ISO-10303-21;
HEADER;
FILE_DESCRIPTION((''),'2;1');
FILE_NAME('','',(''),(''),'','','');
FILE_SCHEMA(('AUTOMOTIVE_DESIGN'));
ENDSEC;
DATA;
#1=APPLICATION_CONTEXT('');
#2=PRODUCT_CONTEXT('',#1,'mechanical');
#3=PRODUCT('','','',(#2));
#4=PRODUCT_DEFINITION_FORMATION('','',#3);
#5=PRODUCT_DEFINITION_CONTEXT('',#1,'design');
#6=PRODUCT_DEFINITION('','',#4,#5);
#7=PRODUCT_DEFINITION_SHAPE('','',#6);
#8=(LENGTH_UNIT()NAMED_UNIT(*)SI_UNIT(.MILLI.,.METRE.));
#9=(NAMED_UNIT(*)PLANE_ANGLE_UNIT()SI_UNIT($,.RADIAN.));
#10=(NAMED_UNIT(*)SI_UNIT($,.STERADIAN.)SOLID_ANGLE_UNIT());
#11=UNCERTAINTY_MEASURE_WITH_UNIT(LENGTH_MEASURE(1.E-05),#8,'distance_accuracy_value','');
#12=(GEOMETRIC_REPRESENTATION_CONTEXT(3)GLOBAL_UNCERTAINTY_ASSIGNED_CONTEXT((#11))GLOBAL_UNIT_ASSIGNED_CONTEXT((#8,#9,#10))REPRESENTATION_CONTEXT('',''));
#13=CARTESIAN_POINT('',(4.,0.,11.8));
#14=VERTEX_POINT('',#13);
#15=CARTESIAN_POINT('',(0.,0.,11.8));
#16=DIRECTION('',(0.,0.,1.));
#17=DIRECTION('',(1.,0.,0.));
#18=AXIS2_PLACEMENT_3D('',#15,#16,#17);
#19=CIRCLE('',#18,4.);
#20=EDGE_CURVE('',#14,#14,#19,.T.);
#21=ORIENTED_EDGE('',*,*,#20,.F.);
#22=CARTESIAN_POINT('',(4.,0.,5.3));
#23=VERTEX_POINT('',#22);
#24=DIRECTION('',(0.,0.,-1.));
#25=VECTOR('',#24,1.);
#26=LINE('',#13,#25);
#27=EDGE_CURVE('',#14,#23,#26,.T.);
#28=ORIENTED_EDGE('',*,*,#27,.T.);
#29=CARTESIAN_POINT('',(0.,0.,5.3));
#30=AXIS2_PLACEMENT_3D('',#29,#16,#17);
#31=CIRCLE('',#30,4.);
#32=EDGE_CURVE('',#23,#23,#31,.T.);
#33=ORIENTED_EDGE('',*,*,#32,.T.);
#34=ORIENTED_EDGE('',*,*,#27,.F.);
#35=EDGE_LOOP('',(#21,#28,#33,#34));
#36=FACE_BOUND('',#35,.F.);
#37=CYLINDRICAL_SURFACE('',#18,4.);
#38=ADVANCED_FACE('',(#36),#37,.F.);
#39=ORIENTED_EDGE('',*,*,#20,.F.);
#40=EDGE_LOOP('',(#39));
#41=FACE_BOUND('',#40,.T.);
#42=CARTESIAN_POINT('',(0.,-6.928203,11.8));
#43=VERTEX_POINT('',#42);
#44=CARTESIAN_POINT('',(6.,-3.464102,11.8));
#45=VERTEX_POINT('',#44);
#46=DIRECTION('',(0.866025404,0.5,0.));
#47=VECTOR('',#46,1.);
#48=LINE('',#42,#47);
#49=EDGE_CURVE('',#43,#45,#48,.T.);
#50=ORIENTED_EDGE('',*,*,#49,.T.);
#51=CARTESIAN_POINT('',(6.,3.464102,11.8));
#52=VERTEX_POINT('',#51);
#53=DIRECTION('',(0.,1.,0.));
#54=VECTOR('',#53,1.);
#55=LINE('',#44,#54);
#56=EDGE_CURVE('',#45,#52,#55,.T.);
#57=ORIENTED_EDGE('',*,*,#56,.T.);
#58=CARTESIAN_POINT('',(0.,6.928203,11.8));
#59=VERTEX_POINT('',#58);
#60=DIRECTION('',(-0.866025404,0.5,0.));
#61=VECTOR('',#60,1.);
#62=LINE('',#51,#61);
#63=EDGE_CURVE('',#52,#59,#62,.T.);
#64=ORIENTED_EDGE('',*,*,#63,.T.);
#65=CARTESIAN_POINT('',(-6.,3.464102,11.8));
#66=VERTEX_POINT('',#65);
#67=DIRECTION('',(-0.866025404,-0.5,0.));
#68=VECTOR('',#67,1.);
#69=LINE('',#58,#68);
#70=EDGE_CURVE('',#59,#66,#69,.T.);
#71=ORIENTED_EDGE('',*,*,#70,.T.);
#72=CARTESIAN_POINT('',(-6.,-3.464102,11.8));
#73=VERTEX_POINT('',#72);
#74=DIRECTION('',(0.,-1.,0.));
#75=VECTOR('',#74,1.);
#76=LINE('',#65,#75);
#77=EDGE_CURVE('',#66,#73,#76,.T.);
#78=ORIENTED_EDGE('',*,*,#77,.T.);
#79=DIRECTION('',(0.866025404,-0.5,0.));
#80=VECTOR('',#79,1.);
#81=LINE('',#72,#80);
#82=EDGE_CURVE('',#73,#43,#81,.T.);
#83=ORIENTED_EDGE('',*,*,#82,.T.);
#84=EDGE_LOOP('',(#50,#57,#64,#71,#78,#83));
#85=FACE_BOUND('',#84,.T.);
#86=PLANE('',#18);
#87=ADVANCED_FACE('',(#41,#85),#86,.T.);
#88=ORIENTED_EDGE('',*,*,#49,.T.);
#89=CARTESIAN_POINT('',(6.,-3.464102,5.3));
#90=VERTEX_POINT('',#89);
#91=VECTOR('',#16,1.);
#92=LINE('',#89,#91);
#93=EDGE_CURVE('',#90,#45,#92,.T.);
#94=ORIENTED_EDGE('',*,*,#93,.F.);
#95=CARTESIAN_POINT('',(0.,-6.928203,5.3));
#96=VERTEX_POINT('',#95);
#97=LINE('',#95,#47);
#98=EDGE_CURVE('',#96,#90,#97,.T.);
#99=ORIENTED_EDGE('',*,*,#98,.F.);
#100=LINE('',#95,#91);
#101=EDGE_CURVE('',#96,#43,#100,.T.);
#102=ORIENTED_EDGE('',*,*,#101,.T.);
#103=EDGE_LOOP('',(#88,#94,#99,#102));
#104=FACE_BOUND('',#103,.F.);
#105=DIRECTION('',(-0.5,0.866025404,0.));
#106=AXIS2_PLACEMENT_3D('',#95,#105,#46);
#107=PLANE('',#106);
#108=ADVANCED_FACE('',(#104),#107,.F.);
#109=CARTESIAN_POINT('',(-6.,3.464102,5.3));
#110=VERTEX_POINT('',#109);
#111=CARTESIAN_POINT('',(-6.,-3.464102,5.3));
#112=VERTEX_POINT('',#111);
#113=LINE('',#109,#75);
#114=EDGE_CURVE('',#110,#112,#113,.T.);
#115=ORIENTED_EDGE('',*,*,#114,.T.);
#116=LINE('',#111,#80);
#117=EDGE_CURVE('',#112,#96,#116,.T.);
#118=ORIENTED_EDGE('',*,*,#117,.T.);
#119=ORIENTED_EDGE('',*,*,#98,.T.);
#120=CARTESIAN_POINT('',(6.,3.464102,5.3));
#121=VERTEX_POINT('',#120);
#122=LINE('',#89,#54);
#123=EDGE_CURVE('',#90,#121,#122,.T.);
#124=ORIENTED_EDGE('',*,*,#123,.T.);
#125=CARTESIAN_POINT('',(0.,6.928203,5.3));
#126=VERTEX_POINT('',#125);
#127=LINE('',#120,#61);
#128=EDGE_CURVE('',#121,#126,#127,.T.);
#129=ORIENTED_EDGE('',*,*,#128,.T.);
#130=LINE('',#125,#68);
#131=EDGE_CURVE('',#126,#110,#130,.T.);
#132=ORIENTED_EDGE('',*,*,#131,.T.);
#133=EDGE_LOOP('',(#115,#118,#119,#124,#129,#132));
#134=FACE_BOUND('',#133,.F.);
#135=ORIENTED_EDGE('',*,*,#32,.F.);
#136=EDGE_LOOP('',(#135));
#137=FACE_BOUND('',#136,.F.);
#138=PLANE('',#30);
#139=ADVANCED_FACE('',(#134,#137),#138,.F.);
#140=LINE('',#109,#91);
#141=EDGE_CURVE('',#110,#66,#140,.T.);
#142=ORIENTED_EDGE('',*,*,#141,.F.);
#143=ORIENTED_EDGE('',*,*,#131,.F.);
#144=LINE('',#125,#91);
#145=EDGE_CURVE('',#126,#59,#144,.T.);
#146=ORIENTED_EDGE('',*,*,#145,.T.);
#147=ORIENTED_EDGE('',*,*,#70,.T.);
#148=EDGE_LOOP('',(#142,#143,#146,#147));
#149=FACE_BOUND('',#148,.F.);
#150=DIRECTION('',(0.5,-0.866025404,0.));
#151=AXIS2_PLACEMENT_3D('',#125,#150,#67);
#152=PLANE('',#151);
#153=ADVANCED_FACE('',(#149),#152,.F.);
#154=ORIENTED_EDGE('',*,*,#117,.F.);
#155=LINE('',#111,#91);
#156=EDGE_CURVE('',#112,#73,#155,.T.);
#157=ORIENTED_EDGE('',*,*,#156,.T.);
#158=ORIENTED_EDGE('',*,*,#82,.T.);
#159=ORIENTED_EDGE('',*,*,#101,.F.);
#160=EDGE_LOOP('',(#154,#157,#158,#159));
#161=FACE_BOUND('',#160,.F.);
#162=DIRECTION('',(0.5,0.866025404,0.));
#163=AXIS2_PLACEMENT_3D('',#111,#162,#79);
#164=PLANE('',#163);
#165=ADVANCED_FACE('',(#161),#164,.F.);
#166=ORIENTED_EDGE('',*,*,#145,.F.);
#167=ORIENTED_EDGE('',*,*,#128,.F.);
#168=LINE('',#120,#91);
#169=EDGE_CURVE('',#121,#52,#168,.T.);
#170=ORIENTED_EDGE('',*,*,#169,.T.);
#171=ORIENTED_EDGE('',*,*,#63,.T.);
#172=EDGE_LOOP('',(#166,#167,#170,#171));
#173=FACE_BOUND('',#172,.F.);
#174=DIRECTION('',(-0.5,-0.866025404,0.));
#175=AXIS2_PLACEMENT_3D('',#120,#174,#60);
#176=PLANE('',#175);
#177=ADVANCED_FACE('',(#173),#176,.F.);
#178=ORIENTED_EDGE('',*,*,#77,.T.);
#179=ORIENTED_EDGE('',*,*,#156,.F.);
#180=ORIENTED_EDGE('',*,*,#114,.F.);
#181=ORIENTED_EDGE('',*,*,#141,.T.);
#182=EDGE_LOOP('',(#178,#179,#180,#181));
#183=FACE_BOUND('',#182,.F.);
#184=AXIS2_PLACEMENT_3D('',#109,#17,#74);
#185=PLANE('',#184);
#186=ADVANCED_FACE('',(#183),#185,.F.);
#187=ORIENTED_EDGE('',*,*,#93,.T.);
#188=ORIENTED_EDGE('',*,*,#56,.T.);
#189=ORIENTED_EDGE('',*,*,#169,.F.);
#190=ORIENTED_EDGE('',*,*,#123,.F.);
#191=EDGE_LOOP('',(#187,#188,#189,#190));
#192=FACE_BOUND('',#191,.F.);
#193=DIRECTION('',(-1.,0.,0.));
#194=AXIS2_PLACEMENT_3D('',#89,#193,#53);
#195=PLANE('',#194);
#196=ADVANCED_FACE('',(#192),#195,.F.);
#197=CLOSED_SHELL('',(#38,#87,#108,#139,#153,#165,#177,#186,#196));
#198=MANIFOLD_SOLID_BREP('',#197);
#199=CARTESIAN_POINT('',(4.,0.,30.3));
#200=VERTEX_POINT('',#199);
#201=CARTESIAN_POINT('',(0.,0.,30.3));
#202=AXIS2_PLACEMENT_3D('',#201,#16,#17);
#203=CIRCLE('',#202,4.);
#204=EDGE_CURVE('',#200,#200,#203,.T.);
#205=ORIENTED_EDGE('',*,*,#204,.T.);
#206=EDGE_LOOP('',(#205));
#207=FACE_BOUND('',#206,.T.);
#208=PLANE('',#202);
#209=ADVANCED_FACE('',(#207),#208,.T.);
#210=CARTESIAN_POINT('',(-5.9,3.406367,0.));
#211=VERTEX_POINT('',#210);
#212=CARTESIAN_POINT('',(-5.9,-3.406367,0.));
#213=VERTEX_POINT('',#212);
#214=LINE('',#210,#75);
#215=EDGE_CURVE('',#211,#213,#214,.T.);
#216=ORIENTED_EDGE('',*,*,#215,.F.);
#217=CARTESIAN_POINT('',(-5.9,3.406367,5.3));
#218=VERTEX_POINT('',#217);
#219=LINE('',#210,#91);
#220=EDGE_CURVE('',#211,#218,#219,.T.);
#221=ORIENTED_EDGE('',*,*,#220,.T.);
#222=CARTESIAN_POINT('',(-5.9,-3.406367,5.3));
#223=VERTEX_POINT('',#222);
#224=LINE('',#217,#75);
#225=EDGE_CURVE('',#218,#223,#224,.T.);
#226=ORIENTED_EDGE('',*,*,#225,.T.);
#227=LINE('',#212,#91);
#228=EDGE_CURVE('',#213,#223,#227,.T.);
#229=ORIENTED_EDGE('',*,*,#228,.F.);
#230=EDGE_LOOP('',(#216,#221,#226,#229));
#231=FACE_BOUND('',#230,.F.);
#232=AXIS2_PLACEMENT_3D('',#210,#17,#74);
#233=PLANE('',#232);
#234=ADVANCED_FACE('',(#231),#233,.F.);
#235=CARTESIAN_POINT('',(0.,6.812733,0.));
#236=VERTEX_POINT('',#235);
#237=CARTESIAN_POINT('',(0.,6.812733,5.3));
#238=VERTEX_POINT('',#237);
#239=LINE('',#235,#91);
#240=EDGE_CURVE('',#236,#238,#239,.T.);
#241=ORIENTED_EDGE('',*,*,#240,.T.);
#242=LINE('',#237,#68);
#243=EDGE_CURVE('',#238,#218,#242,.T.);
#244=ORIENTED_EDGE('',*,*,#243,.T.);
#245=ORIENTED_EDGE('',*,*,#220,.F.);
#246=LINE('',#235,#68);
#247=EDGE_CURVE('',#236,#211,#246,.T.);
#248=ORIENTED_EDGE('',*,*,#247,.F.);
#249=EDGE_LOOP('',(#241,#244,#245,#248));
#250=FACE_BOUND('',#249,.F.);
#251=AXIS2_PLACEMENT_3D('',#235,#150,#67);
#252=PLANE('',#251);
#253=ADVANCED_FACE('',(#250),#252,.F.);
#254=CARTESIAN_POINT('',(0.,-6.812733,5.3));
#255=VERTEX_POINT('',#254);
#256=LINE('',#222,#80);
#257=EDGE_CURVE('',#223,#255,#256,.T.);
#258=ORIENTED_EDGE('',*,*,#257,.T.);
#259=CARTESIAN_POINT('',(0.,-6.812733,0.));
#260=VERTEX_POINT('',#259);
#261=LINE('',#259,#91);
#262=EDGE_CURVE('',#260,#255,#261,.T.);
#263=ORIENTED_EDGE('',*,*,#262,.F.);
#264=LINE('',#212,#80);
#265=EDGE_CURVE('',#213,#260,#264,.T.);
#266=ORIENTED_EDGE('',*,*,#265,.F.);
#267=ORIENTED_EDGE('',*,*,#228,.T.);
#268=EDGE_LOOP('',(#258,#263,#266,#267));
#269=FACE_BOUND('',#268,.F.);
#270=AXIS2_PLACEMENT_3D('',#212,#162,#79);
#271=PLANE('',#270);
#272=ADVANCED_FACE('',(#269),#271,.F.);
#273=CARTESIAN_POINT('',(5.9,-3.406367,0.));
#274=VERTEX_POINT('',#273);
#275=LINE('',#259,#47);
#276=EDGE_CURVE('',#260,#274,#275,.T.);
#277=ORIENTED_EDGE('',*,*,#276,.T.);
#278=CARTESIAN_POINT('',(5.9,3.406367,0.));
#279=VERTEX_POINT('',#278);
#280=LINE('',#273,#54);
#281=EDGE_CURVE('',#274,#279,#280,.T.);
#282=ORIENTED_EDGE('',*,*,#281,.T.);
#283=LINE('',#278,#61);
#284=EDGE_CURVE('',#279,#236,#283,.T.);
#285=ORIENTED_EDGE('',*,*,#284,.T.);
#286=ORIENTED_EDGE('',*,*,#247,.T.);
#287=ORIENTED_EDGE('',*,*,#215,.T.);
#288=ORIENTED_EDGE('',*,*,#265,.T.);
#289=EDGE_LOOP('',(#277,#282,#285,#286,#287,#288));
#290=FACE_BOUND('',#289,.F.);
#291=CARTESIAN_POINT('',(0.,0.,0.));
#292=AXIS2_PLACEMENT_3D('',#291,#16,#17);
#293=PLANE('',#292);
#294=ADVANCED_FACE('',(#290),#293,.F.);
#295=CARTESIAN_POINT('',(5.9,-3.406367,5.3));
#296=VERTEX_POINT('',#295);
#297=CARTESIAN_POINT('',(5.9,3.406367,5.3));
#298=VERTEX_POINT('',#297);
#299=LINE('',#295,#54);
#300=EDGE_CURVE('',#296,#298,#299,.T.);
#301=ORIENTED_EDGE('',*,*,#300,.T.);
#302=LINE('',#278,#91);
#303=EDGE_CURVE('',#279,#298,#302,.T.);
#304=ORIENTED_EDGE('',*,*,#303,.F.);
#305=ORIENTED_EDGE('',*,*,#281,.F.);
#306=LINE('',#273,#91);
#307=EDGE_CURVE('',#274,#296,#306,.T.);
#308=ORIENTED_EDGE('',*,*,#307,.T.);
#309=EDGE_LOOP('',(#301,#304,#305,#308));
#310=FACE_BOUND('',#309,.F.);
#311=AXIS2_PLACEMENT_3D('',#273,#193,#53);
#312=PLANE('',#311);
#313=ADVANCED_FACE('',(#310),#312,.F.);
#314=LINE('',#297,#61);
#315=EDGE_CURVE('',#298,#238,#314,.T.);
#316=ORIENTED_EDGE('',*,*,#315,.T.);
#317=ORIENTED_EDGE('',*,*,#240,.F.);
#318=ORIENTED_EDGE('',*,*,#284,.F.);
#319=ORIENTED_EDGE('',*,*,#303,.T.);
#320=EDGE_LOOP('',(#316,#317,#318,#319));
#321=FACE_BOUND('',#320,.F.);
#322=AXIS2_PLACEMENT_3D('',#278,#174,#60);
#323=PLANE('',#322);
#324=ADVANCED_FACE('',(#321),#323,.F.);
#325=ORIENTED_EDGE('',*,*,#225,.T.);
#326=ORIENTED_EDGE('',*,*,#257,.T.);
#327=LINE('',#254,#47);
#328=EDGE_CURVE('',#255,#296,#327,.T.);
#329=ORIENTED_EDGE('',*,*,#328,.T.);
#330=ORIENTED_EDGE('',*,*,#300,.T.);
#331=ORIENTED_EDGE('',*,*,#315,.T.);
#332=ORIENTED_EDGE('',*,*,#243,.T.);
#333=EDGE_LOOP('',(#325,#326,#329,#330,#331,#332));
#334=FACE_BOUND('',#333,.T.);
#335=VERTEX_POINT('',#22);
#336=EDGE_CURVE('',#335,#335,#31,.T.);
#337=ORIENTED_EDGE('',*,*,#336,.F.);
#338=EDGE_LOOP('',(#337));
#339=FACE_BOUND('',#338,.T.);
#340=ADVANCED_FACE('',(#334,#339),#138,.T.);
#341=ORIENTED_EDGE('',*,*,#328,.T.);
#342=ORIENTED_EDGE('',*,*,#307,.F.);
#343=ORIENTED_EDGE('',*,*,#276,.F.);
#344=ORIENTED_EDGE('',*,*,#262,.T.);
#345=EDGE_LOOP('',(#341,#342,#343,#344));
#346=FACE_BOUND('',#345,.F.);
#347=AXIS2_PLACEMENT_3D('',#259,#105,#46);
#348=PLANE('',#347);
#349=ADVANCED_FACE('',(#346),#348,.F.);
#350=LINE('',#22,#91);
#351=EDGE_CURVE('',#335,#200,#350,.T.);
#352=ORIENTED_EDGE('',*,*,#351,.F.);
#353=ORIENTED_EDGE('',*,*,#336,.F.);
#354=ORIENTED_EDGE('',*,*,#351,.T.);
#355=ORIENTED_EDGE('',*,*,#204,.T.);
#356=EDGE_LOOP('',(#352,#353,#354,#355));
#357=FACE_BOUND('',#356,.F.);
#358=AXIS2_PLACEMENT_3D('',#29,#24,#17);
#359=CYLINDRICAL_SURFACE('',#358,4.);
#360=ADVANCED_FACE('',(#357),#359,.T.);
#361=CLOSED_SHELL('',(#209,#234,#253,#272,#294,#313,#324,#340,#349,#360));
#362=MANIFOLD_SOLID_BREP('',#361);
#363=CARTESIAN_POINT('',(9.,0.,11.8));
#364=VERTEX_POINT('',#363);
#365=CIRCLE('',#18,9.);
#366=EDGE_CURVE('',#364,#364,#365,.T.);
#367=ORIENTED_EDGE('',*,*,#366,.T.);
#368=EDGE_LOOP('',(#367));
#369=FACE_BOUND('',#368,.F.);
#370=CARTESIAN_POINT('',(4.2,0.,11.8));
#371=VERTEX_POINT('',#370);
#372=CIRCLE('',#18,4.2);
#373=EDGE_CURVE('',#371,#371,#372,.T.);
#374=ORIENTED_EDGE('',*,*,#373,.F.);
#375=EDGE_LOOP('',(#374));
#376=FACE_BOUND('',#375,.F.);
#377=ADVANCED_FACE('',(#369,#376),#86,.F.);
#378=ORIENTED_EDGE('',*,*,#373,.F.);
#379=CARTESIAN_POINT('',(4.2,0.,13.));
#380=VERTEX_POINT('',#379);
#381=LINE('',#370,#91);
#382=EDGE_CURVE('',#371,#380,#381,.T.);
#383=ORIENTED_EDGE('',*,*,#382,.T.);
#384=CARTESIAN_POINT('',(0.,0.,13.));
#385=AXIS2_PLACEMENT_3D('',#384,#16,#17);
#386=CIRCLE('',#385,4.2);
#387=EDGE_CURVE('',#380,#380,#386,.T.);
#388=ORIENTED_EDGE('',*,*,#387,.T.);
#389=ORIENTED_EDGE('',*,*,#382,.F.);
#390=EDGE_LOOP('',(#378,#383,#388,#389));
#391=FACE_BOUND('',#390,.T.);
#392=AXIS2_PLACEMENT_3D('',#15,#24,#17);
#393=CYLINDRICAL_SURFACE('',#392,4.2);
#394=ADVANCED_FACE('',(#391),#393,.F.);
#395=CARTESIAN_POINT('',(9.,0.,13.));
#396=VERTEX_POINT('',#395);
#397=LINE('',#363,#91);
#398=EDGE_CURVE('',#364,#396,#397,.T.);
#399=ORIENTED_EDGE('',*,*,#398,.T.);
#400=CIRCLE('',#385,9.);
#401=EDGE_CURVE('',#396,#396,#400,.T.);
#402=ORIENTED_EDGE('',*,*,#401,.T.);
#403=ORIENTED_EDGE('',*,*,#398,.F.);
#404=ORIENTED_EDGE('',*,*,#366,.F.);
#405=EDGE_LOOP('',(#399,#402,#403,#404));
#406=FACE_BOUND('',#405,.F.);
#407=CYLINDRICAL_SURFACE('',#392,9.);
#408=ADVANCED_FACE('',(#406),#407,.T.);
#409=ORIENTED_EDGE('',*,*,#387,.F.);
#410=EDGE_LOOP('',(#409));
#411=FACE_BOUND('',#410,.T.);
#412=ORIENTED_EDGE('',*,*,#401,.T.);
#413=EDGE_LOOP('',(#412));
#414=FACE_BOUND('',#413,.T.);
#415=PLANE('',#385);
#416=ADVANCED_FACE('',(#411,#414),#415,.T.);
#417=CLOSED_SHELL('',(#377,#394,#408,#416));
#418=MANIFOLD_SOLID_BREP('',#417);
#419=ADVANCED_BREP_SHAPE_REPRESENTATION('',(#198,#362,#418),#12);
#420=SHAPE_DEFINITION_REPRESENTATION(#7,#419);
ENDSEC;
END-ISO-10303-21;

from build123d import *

# Parameters (mm, degrees)
F1_DEPTH = 5.3
F2_R     = 4
F3_DEPTH = 25
F5_DEPTH = 6.5
F6_R     = 4
F7_DEPTH = 6.5
F8_R     = 9
F8_R_2   = 4.2
F9_DEPTH = 1.2


with BuildPart() as f1:
    # F0 (on Top) → F1 (new body)
    with BuildSketch(Plane.XY):
        Polygon((0, -6.8127331764), (5.9, -3.4063665882), (5.9, 3.4063665882), (0, 6.8127331764), (-5.9, 3.4063665882), (-5.9, -3.4063665882), align=None)
    extrude(amount=F1_DEPTH)

    # F2 (on face) → F3 (join)
    with BuildSketch(Plane.XY.offset(5.3)):
        Circle(F2_R)
    extrude(amount=F3_DEPTH)


with BuildPart() as f5:
    # F4 (on face) → F5 (new body)
    with BuildSketch(Plane.XY.offset(5.3)):
        Polygon((0, -6.9282032303), (6, -3.4641016151), (6, 3.4641016151), (0, 6.9282032303), (-6, 3.4641016151), (-6, -3.4641016151), align=None)
    extrude(amount=F5_DEPTH)

    # F6 (on face) → F7 (cut)
    with BuildSketch(Plane.XY.offset(11.8)):
        Circle(F6_R)
    extrude(amount=-F7_DEPTH, mode=Mode.SUBTRACT)


with BuildPart() as f9:
    # F8 (on face) → F9 (new body)
    with BuildSketch(Plane.XY.offset(11.8)):
        Circle(F8_R)
        Circle(F8_R_2, mode=Mode.SUBTRACT)
    extrude(amount=F9_DEPTH)


solid = Compound([f1.part, f5.part, f9.part])
